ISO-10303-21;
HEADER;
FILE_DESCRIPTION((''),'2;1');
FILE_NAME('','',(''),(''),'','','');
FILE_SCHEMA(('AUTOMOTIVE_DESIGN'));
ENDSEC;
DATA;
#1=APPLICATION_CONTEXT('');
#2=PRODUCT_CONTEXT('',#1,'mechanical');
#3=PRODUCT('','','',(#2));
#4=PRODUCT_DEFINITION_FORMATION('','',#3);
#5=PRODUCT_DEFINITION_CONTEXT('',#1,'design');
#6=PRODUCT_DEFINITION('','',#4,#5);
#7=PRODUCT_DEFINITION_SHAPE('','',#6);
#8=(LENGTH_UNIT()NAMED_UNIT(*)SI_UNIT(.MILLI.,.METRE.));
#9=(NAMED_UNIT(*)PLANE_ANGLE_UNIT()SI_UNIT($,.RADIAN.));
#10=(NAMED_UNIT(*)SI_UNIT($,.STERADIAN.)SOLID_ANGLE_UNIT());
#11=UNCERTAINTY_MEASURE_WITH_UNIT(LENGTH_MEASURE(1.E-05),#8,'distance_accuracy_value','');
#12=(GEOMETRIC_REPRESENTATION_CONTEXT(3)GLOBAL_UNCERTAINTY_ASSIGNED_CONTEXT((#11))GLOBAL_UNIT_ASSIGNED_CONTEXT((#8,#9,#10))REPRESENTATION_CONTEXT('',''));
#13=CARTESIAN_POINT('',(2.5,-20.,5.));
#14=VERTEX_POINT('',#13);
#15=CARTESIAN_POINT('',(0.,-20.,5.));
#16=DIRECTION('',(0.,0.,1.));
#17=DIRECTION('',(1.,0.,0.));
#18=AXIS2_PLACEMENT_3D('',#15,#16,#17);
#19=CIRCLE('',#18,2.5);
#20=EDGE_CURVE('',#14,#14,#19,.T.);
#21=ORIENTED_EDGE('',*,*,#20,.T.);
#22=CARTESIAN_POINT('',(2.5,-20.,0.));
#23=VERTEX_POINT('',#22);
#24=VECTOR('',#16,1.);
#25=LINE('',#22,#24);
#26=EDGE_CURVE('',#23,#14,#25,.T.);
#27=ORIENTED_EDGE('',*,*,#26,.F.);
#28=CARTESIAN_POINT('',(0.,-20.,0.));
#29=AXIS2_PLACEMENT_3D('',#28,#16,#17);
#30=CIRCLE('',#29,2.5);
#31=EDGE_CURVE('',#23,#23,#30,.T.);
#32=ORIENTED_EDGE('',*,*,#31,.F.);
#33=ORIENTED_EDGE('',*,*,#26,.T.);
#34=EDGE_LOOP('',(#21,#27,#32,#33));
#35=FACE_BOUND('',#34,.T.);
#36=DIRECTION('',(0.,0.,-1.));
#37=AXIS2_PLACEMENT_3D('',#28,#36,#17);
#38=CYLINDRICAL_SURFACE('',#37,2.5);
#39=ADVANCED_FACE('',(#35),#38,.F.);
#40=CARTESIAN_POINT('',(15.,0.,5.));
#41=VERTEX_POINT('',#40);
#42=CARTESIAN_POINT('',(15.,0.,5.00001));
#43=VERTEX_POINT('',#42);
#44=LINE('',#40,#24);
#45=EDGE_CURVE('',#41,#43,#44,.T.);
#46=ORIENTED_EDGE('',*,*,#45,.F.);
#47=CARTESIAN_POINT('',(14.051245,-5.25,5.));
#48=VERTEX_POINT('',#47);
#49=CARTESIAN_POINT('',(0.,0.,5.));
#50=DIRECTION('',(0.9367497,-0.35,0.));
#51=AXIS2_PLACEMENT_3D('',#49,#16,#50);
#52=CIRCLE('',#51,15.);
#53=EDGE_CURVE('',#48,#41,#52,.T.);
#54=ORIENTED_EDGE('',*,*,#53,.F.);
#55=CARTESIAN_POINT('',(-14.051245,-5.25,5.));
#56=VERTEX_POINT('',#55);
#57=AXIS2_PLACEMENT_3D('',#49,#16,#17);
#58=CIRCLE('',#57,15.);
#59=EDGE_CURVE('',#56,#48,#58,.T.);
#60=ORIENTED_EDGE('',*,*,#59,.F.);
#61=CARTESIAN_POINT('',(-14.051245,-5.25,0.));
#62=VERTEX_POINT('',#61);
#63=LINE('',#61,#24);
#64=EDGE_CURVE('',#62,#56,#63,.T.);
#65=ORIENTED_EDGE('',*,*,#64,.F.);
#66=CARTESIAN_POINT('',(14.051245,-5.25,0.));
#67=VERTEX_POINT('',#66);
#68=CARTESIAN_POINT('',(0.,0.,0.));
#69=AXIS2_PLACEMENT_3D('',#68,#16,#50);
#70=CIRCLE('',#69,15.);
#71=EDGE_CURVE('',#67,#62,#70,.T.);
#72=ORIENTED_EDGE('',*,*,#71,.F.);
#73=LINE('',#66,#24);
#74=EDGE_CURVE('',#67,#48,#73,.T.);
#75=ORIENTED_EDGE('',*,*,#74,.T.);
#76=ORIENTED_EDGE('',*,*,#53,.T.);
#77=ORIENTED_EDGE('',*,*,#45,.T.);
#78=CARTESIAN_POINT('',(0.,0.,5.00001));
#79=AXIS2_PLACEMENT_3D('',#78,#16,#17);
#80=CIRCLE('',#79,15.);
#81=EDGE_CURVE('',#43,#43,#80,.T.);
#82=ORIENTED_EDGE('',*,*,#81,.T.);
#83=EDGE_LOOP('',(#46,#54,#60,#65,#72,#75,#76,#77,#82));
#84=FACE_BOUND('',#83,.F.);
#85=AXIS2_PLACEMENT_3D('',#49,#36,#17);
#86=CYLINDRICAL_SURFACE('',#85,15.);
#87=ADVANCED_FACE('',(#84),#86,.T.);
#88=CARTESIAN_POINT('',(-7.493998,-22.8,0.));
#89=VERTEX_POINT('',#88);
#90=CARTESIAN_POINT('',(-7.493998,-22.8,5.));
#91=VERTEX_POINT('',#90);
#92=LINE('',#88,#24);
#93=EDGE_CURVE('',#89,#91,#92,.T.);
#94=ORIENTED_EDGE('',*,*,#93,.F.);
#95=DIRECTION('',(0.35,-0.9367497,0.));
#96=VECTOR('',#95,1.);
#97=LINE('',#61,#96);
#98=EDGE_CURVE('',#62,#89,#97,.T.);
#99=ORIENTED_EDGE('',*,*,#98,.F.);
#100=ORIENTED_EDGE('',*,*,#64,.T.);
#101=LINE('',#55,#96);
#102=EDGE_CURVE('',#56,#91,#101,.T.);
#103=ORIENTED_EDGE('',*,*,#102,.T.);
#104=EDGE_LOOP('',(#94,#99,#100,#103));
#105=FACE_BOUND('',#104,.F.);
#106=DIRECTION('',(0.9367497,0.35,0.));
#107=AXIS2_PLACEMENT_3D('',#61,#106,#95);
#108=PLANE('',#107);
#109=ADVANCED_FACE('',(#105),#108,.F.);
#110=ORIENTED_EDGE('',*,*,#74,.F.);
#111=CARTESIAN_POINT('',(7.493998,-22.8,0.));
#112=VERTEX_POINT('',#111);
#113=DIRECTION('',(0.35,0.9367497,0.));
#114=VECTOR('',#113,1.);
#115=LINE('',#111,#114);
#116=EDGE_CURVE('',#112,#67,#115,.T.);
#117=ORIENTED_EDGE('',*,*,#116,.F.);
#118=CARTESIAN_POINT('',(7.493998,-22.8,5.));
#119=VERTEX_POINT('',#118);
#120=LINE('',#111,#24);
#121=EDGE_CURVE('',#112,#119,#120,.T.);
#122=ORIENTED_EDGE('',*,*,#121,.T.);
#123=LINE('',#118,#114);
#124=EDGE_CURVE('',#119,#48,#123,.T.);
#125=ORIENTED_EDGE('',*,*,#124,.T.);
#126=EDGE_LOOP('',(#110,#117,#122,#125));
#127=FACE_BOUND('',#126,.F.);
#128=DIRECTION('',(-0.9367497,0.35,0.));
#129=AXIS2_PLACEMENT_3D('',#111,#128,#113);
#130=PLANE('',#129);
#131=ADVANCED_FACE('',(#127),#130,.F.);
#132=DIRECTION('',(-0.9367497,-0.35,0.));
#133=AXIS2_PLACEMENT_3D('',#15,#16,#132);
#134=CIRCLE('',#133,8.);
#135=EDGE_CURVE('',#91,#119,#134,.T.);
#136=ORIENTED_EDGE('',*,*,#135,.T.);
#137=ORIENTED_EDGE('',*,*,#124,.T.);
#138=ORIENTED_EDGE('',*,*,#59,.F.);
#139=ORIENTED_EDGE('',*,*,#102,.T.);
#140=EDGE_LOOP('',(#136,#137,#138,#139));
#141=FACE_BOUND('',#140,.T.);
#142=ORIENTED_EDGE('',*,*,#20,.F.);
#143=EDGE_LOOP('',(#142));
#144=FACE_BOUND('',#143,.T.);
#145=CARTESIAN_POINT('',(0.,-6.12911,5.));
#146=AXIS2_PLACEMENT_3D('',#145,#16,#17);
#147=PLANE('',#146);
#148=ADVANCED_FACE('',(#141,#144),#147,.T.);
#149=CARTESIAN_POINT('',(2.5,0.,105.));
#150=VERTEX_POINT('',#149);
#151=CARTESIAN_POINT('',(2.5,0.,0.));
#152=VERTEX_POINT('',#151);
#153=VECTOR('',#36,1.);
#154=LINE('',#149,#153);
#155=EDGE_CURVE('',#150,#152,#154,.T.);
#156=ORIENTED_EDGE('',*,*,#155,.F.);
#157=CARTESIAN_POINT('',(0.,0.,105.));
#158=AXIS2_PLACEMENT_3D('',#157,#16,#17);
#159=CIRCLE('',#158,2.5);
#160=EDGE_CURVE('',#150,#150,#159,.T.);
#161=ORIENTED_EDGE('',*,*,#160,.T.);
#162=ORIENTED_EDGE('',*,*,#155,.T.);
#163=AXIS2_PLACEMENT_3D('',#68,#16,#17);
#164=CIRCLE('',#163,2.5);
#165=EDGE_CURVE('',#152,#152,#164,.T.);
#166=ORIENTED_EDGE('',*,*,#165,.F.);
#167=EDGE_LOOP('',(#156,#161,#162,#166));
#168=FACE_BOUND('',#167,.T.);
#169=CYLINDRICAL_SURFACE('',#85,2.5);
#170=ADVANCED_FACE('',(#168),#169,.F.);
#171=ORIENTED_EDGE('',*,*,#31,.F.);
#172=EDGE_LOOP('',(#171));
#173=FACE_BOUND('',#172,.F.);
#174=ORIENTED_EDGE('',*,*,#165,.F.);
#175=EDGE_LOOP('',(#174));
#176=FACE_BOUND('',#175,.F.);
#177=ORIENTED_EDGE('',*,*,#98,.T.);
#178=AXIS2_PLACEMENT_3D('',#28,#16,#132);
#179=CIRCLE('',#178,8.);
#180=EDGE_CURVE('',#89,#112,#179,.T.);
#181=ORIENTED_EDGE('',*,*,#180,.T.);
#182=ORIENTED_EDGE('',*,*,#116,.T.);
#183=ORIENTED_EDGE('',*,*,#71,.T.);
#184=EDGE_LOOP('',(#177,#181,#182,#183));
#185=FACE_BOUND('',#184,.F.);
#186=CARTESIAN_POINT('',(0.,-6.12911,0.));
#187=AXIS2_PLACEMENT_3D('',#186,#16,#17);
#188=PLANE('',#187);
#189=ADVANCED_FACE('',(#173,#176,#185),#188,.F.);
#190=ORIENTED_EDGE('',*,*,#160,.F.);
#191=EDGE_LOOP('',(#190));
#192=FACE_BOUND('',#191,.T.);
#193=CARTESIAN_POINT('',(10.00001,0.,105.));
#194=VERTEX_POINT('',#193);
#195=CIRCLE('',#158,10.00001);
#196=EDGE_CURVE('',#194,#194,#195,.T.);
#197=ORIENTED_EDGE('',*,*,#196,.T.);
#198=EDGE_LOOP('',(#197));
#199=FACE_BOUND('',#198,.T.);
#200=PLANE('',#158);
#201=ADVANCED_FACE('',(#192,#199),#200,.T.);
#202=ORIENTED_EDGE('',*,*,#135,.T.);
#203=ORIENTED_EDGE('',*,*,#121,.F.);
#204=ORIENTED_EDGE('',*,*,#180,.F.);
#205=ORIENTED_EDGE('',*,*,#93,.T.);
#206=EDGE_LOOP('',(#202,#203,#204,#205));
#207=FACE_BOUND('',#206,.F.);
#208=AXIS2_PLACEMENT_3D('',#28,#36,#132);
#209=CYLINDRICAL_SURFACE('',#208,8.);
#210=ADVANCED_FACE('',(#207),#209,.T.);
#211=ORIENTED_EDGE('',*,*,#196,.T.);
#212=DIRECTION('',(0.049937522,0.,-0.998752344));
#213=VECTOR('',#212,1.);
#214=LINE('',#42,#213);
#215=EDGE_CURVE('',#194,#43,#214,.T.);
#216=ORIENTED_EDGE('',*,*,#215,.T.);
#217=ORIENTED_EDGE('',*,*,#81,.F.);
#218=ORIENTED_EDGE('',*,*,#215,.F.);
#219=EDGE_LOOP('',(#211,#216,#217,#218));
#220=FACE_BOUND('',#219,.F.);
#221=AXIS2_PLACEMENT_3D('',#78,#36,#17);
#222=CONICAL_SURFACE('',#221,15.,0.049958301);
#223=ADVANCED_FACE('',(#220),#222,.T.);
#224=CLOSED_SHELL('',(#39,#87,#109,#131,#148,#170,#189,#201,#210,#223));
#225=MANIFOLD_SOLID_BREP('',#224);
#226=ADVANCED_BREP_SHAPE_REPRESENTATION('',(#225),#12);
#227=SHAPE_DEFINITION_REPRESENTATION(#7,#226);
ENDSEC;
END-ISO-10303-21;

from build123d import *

# Parameters (mm, degrees)
F0_R     = 2.5
F1_DEPTH = 5
F2_R     = 15
F2_R_2   = 2.5
F3_DEPTH = 100
F4_SIZE2 = 99.99999
F4_SIZE  = 4.99999


# Not quite as in the source:
# - a fillet or chamfer is up to 0.001 mm smaller than in the source, because OpenCascade refuses the exact size


with BuildPart() as f1:
    # F0 (on Top) → F1 (new body)
    with BuildSketch(Plane.XY):
        with BuildLine():
            Line((7.4939975981, -22.8), (14.0512454964, -5.25))
            ThreePointArc((14.0512454964, -5.25), (0, 15), (-14.0512454964, -5.25))
            Line((-14.0512454964, -5.25), (-7.4939975981, -22.8))
            ThreePointArc((-7.4939975981, -22.8), (0, -28), (7.4939975981, -22.8))
        make_face()
        with Locations((0, -20)):
            Circle(F0_R, mode=Mode.SUBTRACT)
        Circle(F0_R, mode=Mode.SUBTRACT)
    extrude(amount=F1_DEPTH)

    # F2 (on face) → F3 (join)
    with BuildSketch(Plane.XY.offset(5)):
        Circle(F2_R)
        Circle(F2_R_2, mode=Mode.SUBTRACT)
    extrude(amount=F3_DEPTH)

    # F4 (size 5 and 100 in the source; OpenCascade refuses exactly that, so slightly less here)
    f4_edges = [f1.edges().sort_by_distance(p)[0] for p in [
        (-15, 0, 105),
    ]]
    f4_side = f1.faces().sort_by_distance((-14.575736, 0, 105))[0]
    chamfer(f4_edges, length=F4_SIZE, length2=F4_SIZE2, reference=f4_side)


solid = f1.part
